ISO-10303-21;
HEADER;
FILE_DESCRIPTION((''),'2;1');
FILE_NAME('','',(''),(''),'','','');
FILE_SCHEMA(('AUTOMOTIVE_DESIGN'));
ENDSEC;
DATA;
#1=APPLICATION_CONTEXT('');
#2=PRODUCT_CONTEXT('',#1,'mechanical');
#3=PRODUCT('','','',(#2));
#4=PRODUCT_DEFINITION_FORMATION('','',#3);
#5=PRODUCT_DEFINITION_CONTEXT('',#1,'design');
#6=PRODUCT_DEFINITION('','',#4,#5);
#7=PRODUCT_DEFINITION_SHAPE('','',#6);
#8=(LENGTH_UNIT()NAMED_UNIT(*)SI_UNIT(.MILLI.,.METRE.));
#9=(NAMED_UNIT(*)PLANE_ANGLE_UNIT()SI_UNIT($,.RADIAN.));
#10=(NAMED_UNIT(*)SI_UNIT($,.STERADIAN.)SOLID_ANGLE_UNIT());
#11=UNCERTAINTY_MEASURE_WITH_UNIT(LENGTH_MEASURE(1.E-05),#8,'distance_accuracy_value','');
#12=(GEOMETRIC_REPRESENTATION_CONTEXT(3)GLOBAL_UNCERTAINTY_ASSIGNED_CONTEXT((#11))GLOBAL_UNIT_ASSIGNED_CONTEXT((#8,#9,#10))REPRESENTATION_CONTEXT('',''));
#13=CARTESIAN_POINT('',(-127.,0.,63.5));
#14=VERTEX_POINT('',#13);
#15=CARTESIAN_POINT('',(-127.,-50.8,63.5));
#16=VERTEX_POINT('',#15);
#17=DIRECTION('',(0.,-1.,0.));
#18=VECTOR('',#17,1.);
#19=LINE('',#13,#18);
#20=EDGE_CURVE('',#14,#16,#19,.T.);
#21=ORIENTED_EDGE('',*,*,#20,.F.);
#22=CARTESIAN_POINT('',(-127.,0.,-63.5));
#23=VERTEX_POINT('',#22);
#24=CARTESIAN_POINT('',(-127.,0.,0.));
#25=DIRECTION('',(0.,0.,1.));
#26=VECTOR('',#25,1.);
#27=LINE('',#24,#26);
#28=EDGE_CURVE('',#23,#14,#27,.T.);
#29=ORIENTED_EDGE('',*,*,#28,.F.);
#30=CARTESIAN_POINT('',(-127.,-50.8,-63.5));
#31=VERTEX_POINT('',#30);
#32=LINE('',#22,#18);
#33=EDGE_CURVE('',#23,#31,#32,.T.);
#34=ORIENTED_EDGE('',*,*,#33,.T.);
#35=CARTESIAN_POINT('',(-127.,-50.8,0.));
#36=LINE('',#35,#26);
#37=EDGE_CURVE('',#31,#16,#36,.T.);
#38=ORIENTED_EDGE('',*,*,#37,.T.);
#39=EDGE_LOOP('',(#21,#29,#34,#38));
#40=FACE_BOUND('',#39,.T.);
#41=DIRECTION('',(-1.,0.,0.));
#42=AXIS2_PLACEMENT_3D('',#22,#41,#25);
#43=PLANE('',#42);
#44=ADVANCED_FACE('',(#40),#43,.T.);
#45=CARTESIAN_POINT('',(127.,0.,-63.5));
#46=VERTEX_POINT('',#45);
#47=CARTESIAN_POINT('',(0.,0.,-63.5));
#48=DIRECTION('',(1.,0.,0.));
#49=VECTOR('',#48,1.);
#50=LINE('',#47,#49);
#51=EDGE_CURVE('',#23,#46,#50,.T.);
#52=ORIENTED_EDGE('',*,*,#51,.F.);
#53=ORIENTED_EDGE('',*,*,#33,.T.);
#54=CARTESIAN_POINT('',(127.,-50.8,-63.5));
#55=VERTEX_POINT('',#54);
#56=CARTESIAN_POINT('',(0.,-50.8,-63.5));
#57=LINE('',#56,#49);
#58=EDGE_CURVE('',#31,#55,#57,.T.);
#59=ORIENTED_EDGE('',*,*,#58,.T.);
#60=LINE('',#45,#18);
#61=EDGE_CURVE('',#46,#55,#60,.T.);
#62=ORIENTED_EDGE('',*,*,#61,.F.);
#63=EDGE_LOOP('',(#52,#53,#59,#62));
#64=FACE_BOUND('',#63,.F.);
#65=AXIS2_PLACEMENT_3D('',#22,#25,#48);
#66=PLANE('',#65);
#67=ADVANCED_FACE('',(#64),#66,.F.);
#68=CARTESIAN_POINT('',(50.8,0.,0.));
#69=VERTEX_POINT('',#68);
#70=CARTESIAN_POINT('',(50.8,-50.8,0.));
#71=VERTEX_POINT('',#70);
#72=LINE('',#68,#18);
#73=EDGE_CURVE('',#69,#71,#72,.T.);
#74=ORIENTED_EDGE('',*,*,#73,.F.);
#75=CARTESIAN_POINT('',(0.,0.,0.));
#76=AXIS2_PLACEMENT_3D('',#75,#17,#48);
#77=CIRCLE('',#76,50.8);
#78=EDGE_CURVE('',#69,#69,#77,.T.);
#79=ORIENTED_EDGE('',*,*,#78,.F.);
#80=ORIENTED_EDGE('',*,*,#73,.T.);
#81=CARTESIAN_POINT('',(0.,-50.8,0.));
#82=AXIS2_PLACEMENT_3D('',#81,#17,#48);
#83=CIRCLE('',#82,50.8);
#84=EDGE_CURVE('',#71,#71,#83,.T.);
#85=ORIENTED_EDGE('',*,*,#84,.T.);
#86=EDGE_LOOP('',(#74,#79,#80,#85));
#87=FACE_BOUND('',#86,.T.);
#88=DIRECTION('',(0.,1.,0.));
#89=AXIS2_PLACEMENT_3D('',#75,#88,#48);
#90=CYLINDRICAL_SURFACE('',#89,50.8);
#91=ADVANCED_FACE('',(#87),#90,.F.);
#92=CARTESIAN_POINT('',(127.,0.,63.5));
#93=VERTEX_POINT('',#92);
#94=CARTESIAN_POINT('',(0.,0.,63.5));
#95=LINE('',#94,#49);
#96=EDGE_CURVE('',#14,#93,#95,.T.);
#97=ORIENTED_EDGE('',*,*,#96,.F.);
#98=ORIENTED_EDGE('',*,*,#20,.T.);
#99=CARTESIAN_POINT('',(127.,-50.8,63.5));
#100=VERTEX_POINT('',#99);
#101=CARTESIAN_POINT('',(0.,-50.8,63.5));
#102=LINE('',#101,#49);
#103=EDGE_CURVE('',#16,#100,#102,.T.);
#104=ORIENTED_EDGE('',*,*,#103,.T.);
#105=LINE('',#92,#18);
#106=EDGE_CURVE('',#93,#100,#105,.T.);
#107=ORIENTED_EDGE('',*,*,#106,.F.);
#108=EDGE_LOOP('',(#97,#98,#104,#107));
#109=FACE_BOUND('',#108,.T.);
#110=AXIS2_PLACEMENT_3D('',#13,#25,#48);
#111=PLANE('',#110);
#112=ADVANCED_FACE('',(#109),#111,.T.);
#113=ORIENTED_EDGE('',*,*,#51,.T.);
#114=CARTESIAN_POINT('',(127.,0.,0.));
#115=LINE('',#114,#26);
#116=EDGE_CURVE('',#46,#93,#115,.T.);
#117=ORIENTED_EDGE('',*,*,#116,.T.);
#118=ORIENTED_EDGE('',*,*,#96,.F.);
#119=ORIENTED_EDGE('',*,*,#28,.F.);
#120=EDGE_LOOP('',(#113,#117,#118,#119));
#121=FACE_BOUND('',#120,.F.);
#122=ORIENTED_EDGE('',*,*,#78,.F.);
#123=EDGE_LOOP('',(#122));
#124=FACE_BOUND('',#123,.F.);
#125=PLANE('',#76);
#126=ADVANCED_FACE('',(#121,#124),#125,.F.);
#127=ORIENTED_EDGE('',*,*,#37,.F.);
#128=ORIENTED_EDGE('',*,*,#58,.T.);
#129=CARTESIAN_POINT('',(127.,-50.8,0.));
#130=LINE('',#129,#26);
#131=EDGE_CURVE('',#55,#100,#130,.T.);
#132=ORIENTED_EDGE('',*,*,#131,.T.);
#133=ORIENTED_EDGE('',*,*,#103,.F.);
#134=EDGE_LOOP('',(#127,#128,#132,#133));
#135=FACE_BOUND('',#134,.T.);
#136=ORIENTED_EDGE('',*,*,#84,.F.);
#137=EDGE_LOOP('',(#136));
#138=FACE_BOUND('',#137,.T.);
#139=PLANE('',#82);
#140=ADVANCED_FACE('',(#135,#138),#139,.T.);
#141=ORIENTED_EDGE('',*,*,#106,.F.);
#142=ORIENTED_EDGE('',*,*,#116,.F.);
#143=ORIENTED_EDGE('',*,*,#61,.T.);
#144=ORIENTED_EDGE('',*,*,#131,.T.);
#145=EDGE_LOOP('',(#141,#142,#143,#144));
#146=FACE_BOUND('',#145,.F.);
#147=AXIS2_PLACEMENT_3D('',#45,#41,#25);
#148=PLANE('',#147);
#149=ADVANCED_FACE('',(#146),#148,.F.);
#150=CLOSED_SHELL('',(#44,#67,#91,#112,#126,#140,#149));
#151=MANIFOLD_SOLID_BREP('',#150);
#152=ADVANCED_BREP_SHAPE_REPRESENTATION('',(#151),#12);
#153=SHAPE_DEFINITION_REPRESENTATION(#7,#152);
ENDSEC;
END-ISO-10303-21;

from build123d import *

# Parameters (mm, degrees)
F0_W     = 254
F0_H     = 127
F0_R     = 50.8
F1_DEPTH = 50.8


# Not quite as in the source:
# - a feature names something its author has since deleted; it is built from what else it names


with BuildPart() as f1:
    # F0 (on Front) → F1 (new body)
    with BuildSketch(Plane.XZ):
        Rectangle(F0_W, F0_H)
        Circle(F0_R, mode=Mode.SUBTRACT)
    extrude(amount=F1_DEPTH)


solid = f1.part
